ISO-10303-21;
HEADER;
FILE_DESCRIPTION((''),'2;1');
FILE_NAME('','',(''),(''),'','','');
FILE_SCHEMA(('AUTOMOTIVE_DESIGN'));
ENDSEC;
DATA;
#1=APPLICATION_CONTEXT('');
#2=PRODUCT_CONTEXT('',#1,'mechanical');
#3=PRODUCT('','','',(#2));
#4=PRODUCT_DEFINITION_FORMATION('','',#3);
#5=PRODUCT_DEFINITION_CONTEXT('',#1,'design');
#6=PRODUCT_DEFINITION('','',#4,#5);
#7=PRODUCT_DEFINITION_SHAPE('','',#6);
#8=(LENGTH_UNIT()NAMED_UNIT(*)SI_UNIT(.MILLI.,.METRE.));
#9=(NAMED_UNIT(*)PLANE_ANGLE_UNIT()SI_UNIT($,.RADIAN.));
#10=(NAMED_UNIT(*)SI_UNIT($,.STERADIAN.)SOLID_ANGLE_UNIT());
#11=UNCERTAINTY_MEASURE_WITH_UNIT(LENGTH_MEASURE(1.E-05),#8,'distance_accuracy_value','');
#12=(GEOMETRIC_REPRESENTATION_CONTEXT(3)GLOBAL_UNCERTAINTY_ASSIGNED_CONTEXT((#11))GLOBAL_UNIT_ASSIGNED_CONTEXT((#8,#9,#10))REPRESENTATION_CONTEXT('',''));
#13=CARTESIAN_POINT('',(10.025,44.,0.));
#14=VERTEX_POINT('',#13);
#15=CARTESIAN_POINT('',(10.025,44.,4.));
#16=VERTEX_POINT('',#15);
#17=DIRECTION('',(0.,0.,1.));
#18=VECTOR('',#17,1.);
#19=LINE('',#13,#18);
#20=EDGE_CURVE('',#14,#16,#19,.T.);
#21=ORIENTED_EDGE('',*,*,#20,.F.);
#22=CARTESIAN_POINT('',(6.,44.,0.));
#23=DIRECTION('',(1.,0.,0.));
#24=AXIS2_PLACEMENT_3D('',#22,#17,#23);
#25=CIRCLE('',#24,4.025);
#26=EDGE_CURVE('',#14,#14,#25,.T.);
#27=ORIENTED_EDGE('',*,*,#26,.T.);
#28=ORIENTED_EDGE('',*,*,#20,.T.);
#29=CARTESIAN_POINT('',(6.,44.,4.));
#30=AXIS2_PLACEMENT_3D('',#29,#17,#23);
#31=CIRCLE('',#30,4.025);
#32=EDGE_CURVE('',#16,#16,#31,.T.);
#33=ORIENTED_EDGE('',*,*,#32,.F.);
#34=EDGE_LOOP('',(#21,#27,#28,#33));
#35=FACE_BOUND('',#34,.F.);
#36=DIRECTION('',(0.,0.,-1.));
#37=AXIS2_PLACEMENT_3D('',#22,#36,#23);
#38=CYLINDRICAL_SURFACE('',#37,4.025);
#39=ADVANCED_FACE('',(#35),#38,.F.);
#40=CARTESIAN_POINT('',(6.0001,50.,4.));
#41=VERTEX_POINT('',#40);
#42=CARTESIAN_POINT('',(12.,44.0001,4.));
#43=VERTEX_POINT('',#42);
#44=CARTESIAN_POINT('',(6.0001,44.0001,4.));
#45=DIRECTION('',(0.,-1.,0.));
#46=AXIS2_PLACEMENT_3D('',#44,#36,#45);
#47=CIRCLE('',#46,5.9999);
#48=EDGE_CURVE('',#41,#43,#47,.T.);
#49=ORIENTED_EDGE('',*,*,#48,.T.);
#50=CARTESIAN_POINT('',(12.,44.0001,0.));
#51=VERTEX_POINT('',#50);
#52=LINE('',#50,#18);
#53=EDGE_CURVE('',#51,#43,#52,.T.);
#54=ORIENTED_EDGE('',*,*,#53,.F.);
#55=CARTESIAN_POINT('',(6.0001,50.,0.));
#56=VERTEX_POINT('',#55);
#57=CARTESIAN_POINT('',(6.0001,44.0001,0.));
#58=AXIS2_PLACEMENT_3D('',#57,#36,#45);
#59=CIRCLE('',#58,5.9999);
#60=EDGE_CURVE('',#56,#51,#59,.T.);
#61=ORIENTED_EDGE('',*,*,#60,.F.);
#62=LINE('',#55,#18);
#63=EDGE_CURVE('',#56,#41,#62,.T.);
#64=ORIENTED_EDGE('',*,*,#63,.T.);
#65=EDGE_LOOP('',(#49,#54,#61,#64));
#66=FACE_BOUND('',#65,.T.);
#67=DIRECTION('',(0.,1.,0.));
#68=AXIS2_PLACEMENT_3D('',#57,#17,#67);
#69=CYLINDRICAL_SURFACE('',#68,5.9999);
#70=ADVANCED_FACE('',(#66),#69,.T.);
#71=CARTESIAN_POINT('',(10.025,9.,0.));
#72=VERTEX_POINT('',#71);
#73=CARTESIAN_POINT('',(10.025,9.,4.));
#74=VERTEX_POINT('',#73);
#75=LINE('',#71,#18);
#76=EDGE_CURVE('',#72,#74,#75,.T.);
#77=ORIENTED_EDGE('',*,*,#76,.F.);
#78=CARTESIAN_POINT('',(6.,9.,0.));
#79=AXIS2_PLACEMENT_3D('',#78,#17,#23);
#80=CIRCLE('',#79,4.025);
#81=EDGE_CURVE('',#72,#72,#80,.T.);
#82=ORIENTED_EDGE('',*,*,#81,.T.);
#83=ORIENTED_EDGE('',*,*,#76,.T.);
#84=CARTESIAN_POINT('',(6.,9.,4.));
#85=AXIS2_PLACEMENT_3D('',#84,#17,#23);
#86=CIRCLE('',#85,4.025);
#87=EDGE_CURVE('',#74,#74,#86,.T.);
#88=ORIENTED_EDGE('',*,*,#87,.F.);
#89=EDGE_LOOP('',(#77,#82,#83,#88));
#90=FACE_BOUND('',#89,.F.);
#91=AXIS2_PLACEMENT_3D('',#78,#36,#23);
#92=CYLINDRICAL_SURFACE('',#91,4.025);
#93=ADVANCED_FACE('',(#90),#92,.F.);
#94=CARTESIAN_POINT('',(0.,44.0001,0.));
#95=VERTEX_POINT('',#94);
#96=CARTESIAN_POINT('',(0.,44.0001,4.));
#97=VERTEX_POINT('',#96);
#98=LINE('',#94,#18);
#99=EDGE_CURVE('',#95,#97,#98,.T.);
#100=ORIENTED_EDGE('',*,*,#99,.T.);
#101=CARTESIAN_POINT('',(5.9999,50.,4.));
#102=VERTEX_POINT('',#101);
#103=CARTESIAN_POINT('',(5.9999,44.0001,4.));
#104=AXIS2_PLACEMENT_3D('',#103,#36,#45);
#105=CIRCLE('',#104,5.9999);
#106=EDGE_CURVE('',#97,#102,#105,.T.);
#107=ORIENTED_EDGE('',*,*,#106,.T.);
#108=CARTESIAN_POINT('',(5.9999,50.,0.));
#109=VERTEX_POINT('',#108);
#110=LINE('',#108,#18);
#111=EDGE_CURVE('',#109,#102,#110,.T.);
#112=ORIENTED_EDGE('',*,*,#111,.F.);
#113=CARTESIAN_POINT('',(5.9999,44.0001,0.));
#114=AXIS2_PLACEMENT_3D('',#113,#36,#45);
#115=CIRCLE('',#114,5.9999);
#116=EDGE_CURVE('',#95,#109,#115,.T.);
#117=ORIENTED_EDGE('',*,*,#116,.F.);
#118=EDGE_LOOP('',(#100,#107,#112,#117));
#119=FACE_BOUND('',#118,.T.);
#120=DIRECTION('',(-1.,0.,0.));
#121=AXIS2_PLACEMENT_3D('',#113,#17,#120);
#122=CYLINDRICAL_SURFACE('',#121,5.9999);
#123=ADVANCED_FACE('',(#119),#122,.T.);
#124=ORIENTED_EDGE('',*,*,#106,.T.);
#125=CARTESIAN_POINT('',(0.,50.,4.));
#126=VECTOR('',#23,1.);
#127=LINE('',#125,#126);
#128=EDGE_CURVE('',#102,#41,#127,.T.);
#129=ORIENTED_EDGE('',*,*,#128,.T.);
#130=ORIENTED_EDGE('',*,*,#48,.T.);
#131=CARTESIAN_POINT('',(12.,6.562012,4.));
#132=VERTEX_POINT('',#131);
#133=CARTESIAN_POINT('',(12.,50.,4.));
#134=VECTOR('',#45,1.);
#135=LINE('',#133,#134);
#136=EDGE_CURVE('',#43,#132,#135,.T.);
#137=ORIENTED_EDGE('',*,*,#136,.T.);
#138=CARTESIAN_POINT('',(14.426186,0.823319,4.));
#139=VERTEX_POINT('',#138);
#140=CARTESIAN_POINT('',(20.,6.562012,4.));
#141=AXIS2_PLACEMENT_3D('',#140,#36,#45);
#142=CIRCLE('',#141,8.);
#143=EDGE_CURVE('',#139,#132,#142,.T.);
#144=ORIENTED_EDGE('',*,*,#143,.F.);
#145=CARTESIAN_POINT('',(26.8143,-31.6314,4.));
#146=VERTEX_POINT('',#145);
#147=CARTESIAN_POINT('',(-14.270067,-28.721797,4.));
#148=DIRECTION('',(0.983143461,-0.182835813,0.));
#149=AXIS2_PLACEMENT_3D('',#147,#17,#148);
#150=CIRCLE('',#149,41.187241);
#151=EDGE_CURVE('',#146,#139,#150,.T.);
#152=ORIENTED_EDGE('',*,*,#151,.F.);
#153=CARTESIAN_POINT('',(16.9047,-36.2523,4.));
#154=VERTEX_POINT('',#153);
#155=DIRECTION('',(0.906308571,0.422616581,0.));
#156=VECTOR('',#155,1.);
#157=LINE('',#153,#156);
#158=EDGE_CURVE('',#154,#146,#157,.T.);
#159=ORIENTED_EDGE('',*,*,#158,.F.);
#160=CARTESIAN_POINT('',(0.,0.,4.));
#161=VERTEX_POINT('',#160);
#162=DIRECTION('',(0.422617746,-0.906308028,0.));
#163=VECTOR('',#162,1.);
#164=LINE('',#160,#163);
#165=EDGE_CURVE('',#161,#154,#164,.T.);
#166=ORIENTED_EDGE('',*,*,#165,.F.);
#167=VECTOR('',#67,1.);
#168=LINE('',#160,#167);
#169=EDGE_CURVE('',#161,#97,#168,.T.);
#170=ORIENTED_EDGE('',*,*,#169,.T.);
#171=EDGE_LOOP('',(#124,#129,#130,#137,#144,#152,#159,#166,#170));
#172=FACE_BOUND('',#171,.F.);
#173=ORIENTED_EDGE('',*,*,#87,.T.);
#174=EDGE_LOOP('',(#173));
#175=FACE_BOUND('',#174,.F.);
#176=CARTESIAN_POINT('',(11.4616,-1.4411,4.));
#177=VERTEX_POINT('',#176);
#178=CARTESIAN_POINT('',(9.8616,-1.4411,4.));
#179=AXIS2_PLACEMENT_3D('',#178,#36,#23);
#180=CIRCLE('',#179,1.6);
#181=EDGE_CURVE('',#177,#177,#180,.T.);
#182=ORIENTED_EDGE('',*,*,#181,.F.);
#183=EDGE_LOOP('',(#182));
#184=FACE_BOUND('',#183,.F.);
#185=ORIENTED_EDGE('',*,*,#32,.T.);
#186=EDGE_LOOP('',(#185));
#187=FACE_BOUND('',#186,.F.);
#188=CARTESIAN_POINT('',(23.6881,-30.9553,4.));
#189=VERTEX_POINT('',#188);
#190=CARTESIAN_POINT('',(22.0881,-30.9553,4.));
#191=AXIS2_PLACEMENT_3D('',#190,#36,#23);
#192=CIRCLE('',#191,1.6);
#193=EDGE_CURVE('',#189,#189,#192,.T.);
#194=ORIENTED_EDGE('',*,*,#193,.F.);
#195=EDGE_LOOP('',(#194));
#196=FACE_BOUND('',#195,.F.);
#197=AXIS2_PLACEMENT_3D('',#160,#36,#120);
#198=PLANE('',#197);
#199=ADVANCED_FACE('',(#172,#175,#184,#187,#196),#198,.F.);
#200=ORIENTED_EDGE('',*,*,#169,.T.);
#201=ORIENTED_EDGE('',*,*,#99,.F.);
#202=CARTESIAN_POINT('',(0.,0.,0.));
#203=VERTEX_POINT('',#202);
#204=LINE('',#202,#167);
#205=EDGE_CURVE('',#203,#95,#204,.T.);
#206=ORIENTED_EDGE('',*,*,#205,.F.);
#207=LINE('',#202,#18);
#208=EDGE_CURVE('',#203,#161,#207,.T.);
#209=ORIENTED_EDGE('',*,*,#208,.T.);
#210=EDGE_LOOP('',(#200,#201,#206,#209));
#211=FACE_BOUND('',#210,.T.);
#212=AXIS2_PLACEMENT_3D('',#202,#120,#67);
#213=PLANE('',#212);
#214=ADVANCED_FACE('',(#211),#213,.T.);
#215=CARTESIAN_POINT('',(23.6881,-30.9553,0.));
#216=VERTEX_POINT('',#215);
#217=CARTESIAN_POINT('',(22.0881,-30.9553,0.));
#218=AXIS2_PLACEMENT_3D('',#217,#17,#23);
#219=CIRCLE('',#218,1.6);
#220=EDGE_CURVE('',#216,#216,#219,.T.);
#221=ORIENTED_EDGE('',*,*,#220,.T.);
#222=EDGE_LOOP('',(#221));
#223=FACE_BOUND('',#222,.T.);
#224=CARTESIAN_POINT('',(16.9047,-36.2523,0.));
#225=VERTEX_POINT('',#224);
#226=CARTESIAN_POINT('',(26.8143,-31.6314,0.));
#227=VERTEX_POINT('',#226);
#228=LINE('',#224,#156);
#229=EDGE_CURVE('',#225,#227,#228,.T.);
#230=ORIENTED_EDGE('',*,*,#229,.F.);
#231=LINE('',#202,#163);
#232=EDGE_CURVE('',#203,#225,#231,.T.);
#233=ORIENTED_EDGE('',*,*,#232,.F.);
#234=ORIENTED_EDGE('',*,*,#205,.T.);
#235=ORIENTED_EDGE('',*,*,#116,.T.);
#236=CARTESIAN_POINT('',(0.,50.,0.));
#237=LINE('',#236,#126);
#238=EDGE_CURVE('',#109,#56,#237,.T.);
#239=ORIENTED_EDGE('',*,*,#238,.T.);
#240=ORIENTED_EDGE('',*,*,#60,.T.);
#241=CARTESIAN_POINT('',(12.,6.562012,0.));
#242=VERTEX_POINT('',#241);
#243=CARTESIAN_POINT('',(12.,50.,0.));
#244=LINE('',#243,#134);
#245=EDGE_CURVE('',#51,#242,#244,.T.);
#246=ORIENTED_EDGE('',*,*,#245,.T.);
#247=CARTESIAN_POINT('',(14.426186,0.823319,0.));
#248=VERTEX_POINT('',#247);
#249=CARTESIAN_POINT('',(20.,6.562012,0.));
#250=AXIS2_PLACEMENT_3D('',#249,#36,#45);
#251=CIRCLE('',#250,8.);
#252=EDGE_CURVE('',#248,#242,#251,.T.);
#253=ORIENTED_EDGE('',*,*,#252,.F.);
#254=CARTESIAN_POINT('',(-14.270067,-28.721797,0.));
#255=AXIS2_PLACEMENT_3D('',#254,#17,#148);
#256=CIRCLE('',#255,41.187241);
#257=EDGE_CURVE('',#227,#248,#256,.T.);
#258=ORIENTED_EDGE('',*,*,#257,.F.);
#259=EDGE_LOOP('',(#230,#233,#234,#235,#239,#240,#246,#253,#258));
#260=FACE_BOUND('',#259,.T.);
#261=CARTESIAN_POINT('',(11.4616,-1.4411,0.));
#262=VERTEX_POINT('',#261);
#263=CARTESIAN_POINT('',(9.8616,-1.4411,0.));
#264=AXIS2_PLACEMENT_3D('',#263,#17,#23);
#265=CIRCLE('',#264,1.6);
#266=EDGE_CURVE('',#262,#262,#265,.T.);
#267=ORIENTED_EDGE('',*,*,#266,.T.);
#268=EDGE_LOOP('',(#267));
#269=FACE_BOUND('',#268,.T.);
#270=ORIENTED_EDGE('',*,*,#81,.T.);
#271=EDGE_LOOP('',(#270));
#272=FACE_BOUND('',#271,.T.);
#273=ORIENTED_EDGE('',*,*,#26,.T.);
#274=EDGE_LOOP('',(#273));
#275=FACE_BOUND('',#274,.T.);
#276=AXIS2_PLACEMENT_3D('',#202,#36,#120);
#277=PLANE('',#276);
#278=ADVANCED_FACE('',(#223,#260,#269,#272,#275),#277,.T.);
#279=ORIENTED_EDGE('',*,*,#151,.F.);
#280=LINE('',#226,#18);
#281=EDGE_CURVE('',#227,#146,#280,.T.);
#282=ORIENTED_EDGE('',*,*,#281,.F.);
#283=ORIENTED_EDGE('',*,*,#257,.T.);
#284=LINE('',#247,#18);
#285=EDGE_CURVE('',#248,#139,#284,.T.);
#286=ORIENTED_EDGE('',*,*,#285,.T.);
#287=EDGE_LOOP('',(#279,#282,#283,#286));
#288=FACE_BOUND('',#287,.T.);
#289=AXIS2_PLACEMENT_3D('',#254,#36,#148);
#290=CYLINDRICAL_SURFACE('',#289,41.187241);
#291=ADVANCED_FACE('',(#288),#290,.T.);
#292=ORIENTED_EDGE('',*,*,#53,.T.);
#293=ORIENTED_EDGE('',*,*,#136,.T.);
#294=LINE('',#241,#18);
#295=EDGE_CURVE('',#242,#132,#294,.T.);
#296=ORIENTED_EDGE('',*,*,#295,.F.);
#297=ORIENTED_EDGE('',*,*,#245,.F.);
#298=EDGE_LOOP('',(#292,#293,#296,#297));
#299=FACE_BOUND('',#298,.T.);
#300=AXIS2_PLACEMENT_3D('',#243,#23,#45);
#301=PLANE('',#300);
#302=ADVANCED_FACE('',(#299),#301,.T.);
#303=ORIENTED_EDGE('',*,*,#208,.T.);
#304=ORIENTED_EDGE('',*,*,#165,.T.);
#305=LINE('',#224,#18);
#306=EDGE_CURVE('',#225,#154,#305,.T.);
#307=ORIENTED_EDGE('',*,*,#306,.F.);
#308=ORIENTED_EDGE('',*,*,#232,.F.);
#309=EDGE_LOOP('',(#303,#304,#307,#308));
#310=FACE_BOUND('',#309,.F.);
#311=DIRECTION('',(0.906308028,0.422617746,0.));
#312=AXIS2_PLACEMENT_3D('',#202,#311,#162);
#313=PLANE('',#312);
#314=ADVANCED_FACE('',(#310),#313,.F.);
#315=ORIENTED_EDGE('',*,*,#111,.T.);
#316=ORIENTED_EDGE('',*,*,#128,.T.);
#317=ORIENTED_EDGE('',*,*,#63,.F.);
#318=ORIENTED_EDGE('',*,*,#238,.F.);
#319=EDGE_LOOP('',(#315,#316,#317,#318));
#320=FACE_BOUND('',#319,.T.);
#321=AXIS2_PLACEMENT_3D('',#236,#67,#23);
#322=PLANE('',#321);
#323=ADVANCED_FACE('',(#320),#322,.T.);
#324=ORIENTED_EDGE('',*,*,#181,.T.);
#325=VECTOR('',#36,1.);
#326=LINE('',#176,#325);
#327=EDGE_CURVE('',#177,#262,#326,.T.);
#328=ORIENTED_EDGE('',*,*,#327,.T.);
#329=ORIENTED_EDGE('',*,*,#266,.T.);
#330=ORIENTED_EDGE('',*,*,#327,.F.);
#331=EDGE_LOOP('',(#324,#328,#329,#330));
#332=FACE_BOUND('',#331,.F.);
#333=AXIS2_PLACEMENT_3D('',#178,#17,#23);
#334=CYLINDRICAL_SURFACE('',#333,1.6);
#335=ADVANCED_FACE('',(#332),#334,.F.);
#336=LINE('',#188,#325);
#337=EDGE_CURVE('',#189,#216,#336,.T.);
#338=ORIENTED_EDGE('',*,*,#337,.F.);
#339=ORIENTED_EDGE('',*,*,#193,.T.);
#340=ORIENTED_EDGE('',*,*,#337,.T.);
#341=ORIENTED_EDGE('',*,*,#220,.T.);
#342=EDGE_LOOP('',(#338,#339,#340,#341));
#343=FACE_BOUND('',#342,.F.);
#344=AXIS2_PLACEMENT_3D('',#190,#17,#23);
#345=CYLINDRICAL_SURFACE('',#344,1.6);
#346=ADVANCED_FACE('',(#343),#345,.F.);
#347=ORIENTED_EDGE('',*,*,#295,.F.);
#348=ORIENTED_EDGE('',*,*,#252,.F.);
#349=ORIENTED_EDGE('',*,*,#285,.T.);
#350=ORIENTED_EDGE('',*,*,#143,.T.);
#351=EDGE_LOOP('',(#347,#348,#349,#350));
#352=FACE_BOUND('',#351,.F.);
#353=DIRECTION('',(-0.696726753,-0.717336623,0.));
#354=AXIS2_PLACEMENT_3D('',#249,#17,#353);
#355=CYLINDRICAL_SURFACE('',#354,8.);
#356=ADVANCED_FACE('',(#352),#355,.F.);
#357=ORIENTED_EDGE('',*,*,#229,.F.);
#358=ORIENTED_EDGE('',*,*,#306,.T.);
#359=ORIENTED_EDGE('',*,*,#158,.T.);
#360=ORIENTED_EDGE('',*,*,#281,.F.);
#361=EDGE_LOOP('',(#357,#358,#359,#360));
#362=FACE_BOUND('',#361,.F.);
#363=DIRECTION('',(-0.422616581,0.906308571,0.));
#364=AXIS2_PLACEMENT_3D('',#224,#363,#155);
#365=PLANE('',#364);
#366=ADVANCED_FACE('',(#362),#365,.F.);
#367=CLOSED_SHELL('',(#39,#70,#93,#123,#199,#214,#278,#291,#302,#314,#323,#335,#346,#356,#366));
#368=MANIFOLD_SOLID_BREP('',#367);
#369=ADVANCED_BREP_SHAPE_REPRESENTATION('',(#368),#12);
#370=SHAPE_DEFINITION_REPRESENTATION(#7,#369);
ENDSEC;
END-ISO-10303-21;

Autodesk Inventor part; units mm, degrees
ref_plane "YZ Plane" through (0, 0, 0) normal (1, 0, 0) x (0, 1, 0)
ref_plane "XZ Plane" through (0, 0, 0) normal (0, 1, 0) x (-1, 0, 0)
ref_plane "XY Plane" through (0, 0, 0) normal (0, 0, 1) x (1, 0, 0)
sketch "스케치1" plane through (0, 0, 0) normal (0, 0, 1) x (1, 0, 0)
  line L0 (0, 0) -> (8.4524, -18.1262)
  line L1 (0, 0) -> (20, 0) construction
  line L2 (8.4524, -18.1262) -> (14.7965, -15.1678)
  line L3 (8.4524, -18.1262) -> (16.9047, -36.2523)
  line L4 (8.4524, -18.1262) -> (28.4524, -18.1262) construction
  arc A0 (16.9047, -36.2523) -> (0, 0) centre (-14.2701, -28.7218) ccw
  line L5 (0, 0) -> (0, 50)
  line L6 (0, 0) -> (50, 0) construction
  line L7 (0, 50) -> (12, 50)
  line L8 (12, 50) -> (12, 3)
  circle A1 centre (6, 44) radius 4.025
  circle A2 centre (6, 9) radius 4.025
  line L9 (16.9047, -36.2523) -> (26.8143, -31.6314)
  line L10 (16.9047, -36.2523) -> (27.8387, -36.2523) construction
  line L11 (12, -47.3039) -> (11.9482, -47.1928)
  arc A3 (26.2229, -36.2523) -> (12, 3) centre (-14.2701, -28.7218) ccw
  dimension "d16" = 20
  dimension "d17" = 65
  dimension "d18" = 7
  dimension "d19" = 90
  dimension "d20" = 20
  dimension "d21" = 65
  dimension "d22" = 50
  dimension "d23" = 90
  dimension "d24" = 12
  dimension "d25" = 90
  dimension "d26" = 47
  dimension "d27" = 8.05
  dimension "d28" = 8.05
  dimension "d29" = 6
  dimension "d30" = 6
  dimension "d31" = 6
  dimension "d32" = 35
  dimension "d33" = 25
extrude "돌출1" add sketch "스케치1" along normal blind 4 contours L5 L7 L8 A3 L9 A0
fillet "모깎기1" radius 6 2 edges at (12, 50, 2) (0, 50, 2)
sketch "스케치2" plane through (0, 0, 4) normal (0, 0, 1) x (1, 0, 0)
  line L0 (16.9047, -36.2523) -> (26.8143, -31.6314) projected
  arc A0 (17.3077, -34.3271) -> (18.715, -35.4082) centre (18.2923, -34.5019) ccw projected
  arc A1 (26.2765, -31.8822) -> (26.8523, -31.032) centre (25.8539, -30.9759) ccw projected
  line L1 (20, -34.809) -> (17.8869, -30.2774)
  line L2 (20, -34.809) -> (25, -34.809) construction
  line L3 (17.8869, -30.2774) -> (26.834, -26.1053)
  arc A2 (26.8143, -31.6314) -> (12, 3) centre (-14.2701, -28.7218) ccw projected
  line L4 (26.834, -26.1053) -> (17.7607, -30.3363)
  arc A3 (16.9047, -36.2523) -> (0, 0) centre (-14.2701, -28.7218) ccw projected
  arc A4 (26.2765, -31.8822) -> (26.8523, -31.032) centre (25.8539, -30.9759) ccw projected
  line L5 (26.834, -26.1053) -> (16.9047, -36.2523)
  line L6 (17.7607, -30.3363) -> (26.8143, -31.6314)
  circle A5 centre (22.0881, -30.9553) radius 1.6
  point P0 (12.3536, 2.7038)
  point P1 (0.5383, -0.2738)
  dimension "d38" = 5
  dimension "d39" = 115
  dimension "d40" = 90
  dimension "d41" = 3.2
extrude "돌출2" cut sketch "스케치2" against normal blind 4 contours A5 L6 L5 | L5 L6 A5 | A5 L5 L6 | L5 A5 L6
sketch "스케치4" plane through (0, 0, 4) normal (0, 0, 1) x (1, 0, 0)
  line L0 (12, 3) -> (12, 44) projected
  line L1 (12, 3) -> (2.5423, -1.4102)
  arc A0 (16.9047, -36.2523) -> (0, 0) centre (-14.2701, -28.7218) ccw projected
  line L2 (12, 3) -> (22.4355, 3) construction
  line L3 (7.2711, 0.7949) -> (9.8068, -4.643)
  line L4 (7.2711, 0.7949) -> (13.2711, 0.7949) construction
  line L5 (9.8068, -4.643) -> (7.8894, -5.5371)
  line L6 (9.8068, -4.643) -> (16.6121, -1.4696)
  arc A1 (26.8143, -31.6314) -> (12, 3) centre (-14.2701, -28.7218) ccw projected
  line L7 (9.8068, -4.643) -> (17.3156, -4.643) construction
  line L8 (2.5423, -1.4102) -> (16.6121, -1.4696)
  line L9 (7.8894, -5.5371) -> (12, 3)
  circle A2 centre (9.8616, -1.4411) radius 1.6
  dimension "d54" = 155
  dimension "d55" = 6
  dimension "d57" = 25
  dimension "d58" = 3.2
extrude "돌출4" cut sketch "스케치4" against normal up to surface (4 mm away) contours A2 L8 L9 | L9 L8 L3 A2 | L3 L8 A2 | A2 L9 L8 | L9 A2 L3 L8 | L8 L3 A2
sketch "스케치6" plane through (0, 0, 0) normal (0, 0, -1) x (-1, 0, 0)
  arc A0 (0, 0) -> (-16.9047, -36.2523) centre (14.2701, -28.7218) ccw projected
  line L0 (0, 0) -> (-16.9047, -36.2523)
  line L1 (-16.9047, -36.2523) -> (-26.8143, -31.6314) projected
  line L2 (-16.9047, -36.2523) -> (-26.8143, -31.6314)
  line L3 (-26.8143, -31.6314) -> (-9.9095, 4.6209)
  line L4 (-9.9095, 4.6209) -> (0, 0)
extrude "돌출6" add sketch "스케치6" against normal up to surface (4 mm away) contours L0 A0
fillet "모깎기3" radius 8 1 edges at (12, 3, 2)
properties part number "Grip_" material "알루미늄 6061"
